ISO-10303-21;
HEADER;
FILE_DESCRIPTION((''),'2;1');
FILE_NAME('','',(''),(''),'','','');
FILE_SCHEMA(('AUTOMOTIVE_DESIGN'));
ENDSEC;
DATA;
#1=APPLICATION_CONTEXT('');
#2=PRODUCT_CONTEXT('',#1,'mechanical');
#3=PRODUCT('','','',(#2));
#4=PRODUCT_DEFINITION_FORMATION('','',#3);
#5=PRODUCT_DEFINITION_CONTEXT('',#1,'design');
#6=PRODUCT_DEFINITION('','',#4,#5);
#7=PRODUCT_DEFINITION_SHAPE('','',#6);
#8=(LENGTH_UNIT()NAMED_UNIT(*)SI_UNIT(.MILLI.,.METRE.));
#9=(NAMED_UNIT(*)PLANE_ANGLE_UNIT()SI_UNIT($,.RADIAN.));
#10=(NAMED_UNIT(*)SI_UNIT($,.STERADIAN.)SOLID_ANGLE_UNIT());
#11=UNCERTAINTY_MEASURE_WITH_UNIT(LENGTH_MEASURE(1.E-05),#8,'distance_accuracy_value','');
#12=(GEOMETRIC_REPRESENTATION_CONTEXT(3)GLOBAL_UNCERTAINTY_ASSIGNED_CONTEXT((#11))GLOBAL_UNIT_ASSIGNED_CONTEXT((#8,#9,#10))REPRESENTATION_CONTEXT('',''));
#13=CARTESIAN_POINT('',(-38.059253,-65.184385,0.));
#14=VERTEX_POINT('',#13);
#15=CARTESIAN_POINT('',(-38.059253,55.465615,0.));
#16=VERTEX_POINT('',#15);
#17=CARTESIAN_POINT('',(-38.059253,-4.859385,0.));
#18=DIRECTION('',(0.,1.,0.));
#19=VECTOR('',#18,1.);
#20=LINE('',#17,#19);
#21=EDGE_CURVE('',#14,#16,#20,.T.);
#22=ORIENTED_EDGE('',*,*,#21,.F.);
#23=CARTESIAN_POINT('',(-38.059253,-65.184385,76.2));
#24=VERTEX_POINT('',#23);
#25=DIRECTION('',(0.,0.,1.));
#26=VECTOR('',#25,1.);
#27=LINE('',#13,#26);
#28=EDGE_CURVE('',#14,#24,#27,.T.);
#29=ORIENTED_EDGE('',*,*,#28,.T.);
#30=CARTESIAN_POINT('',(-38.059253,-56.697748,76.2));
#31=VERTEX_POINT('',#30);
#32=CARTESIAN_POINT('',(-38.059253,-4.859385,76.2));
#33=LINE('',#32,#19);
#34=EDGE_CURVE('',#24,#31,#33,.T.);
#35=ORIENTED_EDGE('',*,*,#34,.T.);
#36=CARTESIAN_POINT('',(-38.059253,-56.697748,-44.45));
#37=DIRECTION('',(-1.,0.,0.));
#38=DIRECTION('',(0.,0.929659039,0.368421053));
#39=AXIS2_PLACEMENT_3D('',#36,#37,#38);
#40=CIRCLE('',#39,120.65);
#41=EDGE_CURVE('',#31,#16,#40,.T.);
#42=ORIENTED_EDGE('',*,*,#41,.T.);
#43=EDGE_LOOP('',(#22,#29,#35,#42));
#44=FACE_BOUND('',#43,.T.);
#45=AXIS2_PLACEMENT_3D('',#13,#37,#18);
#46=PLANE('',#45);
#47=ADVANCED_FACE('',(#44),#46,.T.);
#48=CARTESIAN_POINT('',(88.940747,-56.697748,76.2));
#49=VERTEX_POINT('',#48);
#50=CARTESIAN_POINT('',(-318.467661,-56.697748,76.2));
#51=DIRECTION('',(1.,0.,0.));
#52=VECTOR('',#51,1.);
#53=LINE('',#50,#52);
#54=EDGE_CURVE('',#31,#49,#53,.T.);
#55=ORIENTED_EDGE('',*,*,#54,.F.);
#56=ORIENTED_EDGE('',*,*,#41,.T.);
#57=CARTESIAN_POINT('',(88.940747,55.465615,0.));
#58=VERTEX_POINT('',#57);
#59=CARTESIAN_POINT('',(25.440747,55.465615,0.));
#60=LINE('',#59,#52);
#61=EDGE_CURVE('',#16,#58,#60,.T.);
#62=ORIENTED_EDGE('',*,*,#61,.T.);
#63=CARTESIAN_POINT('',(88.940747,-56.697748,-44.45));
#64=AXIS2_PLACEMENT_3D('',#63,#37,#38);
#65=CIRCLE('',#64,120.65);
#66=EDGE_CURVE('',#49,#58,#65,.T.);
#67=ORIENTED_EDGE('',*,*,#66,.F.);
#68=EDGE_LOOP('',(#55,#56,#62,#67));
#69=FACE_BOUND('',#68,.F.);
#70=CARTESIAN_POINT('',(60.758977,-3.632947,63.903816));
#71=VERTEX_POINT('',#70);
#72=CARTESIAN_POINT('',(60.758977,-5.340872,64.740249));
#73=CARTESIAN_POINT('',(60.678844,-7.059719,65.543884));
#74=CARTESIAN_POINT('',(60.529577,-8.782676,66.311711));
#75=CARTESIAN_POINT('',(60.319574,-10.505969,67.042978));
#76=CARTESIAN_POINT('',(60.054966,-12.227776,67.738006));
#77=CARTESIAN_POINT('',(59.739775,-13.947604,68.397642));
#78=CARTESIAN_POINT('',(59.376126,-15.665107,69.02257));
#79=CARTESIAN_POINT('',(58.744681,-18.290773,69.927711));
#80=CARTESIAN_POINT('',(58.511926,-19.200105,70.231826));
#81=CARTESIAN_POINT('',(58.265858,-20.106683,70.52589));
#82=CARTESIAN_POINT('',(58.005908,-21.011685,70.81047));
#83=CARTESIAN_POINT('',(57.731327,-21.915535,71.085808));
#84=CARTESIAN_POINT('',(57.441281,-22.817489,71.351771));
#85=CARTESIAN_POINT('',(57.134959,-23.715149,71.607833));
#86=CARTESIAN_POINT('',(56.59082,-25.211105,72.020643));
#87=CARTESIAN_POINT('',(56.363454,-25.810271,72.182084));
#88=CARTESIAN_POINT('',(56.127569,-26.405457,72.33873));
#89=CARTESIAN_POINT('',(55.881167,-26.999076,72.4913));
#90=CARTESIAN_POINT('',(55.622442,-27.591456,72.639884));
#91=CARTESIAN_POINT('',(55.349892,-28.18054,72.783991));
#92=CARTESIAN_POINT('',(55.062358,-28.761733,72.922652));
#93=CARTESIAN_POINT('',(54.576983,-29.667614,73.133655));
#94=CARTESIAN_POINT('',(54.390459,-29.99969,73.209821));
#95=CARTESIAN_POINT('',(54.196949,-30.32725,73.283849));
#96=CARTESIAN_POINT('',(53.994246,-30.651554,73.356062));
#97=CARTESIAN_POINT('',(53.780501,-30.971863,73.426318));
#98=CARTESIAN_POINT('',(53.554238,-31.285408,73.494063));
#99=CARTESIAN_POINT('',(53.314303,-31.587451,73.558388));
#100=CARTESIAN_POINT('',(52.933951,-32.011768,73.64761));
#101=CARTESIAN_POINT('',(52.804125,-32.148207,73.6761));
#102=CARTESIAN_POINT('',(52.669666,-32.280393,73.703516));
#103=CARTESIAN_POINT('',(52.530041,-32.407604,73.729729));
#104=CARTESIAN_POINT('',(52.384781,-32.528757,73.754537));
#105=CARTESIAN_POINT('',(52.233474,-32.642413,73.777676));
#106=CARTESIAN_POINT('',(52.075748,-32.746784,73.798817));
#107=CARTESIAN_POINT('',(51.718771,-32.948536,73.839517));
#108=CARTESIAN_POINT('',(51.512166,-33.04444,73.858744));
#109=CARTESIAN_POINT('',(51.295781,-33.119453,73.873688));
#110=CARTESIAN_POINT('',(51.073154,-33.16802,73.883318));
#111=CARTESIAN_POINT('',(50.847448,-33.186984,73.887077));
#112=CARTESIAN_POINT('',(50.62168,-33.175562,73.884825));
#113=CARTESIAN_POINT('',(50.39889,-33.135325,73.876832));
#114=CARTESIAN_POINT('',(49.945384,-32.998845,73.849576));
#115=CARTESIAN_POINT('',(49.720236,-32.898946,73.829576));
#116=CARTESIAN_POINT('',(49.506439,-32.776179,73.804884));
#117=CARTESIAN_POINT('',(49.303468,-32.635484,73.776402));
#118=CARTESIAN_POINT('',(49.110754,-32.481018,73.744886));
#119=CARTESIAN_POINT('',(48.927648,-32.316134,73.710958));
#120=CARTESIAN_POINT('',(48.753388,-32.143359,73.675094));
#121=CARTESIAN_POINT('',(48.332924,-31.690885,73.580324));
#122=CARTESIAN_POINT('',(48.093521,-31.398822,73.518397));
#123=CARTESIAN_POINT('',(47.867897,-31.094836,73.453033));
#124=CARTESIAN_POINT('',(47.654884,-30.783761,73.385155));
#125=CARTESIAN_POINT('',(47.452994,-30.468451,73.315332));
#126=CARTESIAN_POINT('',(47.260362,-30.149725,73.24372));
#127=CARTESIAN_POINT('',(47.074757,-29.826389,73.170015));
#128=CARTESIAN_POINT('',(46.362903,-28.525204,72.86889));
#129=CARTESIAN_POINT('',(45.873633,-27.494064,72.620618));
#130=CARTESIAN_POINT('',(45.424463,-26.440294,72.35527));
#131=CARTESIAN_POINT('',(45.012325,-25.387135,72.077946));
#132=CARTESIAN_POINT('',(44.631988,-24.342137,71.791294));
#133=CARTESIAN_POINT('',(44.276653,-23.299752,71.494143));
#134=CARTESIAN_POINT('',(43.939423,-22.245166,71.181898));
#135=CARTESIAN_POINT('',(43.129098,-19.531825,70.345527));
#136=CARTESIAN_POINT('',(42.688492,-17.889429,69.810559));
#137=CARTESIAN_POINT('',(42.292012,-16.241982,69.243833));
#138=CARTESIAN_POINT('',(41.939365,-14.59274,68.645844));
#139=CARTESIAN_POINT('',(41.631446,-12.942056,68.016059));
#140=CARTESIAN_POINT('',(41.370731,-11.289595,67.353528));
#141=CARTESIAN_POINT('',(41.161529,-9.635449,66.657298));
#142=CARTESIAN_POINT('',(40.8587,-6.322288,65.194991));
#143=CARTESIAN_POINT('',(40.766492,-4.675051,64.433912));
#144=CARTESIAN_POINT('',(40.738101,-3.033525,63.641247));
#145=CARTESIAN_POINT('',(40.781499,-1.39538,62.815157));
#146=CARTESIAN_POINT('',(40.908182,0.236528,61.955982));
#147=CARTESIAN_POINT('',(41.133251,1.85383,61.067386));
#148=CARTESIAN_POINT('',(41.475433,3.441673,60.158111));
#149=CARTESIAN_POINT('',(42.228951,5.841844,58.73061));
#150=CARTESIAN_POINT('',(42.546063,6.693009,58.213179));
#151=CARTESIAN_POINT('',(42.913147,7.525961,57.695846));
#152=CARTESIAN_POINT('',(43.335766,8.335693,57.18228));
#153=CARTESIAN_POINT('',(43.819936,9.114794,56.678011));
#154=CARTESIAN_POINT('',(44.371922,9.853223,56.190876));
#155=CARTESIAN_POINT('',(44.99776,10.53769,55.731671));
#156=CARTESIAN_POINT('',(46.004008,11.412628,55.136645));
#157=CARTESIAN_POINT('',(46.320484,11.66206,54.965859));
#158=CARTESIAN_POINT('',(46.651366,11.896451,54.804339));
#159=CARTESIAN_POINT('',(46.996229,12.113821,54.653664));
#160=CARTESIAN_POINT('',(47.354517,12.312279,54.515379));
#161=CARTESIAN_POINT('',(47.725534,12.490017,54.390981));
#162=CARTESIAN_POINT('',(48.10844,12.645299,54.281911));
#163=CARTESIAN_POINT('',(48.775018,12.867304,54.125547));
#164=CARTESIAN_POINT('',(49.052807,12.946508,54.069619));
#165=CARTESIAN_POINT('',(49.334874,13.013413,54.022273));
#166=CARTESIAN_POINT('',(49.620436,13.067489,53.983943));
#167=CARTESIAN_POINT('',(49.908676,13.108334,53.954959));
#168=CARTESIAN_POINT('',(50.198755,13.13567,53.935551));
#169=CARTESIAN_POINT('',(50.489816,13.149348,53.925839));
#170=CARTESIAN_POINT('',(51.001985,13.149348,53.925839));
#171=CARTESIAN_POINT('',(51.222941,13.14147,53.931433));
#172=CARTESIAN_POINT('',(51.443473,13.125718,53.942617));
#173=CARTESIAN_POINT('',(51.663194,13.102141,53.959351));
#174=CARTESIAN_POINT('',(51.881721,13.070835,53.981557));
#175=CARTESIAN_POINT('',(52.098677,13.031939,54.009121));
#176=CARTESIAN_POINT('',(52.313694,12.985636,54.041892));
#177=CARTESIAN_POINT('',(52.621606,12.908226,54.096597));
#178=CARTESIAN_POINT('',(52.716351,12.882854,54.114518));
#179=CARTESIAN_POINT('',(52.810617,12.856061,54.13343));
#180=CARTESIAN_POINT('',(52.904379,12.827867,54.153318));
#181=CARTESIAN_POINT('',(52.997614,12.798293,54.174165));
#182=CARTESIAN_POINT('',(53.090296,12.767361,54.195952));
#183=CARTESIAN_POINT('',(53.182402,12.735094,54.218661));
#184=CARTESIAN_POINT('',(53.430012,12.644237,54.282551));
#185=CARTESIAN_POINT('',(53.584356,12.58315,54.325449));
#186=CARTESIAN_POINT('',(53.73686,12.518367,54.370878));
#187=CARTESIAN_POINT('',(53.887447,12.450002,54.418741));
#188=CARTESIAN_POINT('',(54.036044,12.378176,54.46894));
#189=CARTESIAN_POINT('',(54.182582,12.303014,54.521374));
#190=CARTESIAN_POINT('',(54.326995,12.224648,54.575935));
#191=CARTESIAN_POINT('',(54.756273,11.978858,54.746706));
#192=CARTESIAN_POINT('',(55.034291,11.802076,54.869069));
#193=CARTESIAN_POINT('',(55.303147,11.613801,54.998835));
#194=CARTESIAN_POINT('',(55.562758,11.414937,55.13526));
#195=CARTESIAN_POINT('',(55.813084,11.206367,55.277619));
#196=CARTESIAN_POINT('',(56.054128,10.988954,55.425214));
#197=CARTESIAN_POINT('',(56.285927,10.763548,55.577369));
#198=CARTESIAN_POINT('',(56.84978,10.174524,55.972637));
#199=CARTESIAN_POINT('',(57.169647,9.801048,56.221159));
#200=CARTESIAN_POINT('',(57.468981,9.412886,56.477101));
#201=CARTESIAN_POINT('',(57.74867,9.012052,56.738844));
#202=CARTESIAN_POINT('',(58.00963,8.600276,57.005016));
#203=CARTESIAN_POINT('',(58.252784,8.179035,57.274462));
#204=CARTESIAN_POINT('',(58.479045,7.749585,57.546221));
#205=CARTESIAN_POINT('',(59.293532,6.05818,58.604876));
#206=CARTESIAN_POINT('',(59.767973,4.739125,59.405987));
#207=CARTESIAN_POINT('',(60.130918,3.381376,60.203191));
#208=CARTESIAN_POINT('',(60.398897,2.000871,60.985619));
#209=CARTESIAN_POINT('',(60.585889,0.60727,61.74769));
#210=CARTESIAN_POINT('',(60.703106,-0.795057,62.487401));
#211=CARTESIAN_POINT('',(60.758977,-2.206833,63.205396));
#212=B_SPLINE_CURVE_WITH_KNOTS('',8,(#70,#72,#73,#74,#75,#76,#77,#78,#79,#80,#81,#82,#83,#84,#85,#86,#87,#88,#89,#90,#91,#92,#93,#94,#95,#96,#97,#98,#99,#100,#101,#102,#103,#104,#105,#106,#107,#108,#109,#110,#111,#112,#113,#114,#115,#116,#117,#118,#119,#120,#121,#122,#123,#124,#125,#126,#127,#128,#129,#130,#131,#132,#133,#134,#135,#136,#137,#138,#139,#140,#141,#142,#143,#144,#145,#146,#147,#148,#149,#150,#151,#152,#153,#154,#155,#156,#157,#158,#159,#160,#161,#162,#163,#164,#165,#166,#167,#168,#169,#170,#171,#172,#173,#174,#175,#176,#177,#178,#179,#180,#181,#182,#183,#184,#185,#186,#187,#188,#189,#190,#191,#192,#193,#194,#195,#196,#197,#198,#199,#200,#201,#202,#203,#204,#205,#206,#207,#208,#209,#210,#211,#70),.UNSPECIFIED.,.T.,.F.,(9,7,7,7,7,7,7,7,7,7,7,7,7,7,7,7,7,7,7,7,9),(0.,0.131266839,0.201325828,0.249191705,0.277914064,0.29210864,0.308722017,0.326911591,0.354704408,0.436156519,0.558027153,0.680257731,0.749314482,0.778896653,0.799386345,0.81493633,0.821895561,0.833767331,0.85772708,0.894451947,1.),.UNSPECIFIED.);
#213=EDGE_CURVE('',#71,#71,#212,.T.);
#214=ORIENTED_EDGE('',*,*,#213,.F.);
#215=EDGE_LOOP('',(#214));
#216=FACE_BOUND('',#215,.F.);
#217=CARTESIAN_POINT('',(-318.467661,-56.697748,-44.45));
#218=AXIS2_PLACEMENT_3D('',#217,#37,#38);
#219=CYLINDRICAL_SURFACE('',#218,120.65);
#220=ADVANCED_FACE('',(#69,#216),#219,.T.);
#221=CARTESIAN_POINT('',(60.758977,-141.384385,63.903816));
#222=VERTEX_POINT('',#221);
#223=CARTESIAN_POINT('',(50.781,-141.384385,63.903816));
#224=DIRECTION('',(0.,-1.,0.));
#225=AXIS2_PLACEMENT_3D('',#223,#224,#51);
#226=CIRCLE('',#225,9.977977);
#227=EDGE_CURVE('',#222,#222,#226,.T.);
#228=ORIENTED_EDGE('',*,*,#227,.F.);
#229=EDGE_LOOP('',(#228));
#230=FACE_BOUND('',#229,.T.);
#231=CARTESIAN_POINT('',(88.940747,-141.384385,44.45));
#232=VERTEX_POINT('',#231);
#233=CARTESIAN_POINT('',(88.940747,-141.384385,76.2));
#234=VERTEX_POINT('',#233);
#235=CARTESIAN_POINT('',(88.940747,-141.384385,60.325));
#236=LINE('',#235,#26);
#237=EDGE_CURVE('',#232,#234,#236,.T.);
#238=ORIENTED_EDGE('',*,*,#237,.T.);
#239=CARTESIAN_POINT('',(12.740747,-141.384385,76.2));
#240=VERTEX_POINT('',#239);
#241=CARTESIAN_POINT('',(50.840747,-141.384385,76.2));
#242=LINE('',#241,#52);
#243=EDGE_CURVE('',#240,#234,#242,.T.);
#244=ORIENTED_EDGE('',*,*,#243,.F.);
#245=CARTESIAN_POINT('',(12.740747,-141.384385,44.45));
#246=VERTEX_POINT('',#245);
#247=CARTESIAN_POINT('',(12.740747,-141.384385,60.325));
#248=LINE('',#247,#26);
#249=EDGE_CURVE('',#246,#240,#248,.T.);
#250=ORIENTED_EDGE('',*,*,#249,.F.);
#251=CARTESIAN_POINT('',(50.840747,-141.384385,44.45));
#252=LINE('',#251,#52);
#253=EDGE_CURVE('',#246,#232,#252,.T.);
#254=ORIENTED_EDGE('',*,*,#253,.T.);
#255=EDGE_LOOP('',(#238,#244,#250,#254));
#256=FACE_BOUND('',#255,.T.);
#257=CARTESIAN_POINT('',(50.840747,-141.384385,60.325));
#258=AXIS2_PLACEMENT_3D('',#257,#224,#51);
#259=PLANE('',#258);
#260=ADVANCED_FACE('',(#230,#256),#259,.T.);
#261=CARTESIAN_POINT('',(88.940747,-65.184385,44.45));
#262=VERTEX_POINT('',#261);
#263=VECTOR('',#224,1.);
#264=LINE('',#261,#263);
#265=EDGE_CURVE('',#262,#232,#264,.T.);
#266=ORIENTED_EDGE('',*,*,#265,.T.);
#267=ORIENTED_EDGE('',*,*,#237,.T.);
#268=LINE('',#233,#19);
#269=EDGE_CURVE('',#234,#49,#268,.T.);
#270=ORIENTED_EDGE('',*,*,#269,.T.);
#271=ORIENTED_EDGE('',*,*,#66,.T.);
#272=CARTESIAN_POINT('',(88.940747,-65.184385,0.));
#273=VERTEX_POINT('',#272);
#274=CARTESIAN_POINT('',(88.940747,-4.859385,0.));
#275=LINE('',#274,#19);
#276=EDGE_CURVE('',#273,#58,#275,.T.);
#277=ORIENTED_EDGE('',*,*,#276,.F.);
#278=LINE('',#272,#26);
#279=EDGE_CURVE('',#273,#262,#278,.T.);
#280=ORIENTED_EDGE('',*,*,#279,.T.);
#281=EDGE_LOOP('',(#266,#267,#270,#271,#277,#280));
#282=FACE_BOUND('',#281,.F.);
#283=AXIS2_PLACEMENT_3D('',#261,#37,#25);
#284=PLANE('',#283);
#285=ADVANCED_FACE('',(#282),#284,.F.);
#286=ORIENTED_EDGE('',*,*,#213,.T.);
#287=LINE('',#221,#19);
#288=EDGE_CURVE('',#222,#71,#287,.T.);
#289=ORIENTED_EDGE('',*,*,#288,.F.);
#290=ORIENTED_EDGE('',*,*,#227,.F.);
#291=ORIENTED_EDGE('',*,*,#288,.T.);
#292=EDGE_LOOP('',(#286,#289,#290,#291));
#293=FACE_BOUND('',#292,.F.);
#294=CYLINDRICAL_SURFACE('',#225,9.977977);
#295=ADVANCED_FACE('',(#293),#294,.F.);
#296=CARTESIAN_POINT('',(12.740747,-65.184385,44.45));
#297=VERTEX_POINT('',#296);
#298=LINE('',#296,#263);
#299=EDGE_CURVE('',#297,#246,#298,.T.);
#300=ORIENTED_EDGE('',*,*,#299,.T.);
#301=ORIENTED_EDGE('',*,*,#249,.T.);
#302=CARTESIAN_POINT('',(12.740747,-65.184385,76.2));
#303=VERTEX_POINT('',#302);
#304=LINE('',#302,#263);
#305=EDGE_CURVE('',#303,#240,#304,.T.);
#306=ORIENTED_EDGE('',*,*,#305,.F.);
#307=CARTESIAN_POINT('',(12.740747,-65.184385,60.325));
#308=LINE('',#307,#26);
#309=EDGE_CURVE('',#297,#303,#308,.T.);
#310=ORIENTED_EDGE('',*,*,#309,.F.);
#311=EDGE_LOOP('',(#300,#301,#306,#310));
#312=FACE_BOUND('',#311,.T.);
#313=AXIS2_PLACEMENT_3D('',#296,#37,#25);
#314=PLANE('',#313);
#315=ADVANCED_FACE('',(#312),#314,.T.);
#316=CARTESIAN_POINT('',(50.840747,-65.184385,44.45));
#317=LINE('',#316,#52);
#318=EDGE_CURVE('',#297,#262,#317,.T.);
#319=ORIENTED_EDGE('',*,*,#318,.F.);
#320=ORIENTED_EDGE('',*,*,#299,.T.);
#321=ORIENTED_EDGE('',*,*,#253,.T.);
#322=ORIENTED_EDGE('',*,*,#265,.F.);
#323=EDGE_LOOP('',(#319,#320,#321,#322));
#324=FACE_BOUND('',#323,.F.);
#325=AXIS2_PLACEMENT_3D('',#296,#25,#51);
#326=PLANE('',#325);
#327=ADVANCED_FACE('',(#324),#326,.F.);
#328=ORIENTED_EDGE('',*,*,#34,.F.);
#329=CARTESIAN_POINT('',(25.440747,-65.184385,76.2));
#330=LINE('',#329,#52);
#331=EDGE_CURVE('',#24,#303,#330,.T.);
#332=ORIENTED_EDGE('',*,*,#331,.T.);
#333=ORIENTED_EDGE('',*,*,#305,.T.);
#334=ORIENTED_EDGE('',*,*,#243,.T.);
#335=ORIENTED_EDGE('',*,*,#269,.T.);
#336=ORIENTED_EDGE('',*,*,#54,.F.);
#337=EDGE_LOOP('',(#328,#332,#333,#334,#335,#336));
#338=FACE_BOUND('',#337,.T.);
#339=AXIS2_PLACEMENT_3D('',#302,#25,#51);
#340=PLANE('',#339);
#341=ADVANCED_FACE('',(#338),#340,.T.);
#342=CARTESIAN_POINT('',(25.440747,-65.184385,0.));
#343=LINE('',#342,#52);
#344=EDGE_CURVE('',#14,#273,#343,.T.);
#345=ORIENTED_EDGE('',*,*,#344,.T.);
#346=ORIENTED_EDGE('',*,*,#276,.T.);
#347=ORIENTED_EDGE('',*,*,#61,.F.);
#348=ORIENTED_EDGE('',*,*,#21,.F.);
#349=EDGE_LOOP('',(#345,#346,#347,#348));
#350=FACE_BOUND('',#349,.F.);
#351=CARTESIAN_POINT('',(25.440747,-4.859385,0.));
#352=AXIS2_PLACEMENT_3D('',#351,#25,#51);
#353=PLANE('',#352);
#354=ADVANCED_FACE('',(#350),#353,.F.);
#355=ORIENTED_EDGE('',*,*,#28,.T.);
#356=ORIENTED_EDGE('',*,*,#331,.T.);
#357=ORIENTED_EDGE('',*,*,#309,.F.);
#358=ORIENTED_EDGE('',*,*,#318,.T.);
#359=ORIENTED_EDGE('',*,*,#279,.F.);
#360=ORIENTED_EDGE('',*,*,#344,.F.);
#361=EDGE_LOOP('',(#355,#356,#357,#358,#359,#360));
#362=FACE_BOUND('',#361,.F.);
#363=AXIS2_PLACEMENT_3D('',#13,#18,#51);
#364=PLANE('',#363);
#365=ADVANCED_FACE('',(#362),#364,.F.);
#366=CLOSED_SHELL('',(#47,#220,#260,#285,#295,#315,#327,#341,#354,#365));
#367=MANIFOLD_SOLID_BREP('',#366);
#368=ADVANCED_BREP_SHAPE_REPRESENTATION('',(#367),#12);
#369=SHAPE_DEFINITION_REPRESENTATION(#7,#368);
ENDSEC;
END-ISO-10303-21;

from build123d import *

# Parameters (mm, degrees)
F0_W        = 127
F0_H        = 120.65
F1_DEPTH    = 76.2
F2_T1_DEPTH = 687.8168150118
F3_W        = 76.2
F3_H        = 31.75
F4_DEPTH    = 76.2
F5_R        = 9.9779768357
F6_DEPTH    = 215.9


# Not quite as in the source:
# - a fillet or chamfer that OpenCascade refuses, or shapes differently, is made with other operations: its cross-section is extruded or revolved along the edge and cut away or added


with BuildPart() as f1:
    # F0 (on Top) → F1 (new body)
    with BuildSketch(Plane.XY):
        with Locations((25.4407467544, -4.8593845844)):
            Rectangle(F0_W, F0_H)
    extrude(amount=F1_DEPTH)

    # F2: fillet of radius 120.65 on 1 edges, made by hand

    # F2_s2 → F2_t1 (cut)
    with BuildSketch(Plane.YZ.offset(-318.4676607515)):
        with BuildLine():
            ThreePointArc((55.4656154156, 0), (11.1016993136, 55.3480836489), (-56.6977475868, 76.2))
            Line((-56.6977475868, 76.2), (55.4656154156, 76.2))
            Line((55.4656154156, 76.2), (55.4656154156, 0))
        make_face()
    extrude(amount=F2_T1_DEPTH, mode=Mode.SUBTRACT)

    # F3 (on face) → F4 (join)
    with BuildSketch(Plane.XZ.offset(65.1843845844)):
        with Locations((50.8407467544, 60.325)):
            Rectangle(F3_W, F3_H)
    extrude(amount=F4_DEPTH)

    # F5 (on face) → F6 (cut)
    with BuildSketch(Plane.XZ.offset(141.3843845844)):
        with Locations((50.7810004056, 63.9038160443)):
            Circle(F5_R)
    extrude(amount=-F6_DEPTH, mode=Mode.SUBTRACT)


solid = f1.part
